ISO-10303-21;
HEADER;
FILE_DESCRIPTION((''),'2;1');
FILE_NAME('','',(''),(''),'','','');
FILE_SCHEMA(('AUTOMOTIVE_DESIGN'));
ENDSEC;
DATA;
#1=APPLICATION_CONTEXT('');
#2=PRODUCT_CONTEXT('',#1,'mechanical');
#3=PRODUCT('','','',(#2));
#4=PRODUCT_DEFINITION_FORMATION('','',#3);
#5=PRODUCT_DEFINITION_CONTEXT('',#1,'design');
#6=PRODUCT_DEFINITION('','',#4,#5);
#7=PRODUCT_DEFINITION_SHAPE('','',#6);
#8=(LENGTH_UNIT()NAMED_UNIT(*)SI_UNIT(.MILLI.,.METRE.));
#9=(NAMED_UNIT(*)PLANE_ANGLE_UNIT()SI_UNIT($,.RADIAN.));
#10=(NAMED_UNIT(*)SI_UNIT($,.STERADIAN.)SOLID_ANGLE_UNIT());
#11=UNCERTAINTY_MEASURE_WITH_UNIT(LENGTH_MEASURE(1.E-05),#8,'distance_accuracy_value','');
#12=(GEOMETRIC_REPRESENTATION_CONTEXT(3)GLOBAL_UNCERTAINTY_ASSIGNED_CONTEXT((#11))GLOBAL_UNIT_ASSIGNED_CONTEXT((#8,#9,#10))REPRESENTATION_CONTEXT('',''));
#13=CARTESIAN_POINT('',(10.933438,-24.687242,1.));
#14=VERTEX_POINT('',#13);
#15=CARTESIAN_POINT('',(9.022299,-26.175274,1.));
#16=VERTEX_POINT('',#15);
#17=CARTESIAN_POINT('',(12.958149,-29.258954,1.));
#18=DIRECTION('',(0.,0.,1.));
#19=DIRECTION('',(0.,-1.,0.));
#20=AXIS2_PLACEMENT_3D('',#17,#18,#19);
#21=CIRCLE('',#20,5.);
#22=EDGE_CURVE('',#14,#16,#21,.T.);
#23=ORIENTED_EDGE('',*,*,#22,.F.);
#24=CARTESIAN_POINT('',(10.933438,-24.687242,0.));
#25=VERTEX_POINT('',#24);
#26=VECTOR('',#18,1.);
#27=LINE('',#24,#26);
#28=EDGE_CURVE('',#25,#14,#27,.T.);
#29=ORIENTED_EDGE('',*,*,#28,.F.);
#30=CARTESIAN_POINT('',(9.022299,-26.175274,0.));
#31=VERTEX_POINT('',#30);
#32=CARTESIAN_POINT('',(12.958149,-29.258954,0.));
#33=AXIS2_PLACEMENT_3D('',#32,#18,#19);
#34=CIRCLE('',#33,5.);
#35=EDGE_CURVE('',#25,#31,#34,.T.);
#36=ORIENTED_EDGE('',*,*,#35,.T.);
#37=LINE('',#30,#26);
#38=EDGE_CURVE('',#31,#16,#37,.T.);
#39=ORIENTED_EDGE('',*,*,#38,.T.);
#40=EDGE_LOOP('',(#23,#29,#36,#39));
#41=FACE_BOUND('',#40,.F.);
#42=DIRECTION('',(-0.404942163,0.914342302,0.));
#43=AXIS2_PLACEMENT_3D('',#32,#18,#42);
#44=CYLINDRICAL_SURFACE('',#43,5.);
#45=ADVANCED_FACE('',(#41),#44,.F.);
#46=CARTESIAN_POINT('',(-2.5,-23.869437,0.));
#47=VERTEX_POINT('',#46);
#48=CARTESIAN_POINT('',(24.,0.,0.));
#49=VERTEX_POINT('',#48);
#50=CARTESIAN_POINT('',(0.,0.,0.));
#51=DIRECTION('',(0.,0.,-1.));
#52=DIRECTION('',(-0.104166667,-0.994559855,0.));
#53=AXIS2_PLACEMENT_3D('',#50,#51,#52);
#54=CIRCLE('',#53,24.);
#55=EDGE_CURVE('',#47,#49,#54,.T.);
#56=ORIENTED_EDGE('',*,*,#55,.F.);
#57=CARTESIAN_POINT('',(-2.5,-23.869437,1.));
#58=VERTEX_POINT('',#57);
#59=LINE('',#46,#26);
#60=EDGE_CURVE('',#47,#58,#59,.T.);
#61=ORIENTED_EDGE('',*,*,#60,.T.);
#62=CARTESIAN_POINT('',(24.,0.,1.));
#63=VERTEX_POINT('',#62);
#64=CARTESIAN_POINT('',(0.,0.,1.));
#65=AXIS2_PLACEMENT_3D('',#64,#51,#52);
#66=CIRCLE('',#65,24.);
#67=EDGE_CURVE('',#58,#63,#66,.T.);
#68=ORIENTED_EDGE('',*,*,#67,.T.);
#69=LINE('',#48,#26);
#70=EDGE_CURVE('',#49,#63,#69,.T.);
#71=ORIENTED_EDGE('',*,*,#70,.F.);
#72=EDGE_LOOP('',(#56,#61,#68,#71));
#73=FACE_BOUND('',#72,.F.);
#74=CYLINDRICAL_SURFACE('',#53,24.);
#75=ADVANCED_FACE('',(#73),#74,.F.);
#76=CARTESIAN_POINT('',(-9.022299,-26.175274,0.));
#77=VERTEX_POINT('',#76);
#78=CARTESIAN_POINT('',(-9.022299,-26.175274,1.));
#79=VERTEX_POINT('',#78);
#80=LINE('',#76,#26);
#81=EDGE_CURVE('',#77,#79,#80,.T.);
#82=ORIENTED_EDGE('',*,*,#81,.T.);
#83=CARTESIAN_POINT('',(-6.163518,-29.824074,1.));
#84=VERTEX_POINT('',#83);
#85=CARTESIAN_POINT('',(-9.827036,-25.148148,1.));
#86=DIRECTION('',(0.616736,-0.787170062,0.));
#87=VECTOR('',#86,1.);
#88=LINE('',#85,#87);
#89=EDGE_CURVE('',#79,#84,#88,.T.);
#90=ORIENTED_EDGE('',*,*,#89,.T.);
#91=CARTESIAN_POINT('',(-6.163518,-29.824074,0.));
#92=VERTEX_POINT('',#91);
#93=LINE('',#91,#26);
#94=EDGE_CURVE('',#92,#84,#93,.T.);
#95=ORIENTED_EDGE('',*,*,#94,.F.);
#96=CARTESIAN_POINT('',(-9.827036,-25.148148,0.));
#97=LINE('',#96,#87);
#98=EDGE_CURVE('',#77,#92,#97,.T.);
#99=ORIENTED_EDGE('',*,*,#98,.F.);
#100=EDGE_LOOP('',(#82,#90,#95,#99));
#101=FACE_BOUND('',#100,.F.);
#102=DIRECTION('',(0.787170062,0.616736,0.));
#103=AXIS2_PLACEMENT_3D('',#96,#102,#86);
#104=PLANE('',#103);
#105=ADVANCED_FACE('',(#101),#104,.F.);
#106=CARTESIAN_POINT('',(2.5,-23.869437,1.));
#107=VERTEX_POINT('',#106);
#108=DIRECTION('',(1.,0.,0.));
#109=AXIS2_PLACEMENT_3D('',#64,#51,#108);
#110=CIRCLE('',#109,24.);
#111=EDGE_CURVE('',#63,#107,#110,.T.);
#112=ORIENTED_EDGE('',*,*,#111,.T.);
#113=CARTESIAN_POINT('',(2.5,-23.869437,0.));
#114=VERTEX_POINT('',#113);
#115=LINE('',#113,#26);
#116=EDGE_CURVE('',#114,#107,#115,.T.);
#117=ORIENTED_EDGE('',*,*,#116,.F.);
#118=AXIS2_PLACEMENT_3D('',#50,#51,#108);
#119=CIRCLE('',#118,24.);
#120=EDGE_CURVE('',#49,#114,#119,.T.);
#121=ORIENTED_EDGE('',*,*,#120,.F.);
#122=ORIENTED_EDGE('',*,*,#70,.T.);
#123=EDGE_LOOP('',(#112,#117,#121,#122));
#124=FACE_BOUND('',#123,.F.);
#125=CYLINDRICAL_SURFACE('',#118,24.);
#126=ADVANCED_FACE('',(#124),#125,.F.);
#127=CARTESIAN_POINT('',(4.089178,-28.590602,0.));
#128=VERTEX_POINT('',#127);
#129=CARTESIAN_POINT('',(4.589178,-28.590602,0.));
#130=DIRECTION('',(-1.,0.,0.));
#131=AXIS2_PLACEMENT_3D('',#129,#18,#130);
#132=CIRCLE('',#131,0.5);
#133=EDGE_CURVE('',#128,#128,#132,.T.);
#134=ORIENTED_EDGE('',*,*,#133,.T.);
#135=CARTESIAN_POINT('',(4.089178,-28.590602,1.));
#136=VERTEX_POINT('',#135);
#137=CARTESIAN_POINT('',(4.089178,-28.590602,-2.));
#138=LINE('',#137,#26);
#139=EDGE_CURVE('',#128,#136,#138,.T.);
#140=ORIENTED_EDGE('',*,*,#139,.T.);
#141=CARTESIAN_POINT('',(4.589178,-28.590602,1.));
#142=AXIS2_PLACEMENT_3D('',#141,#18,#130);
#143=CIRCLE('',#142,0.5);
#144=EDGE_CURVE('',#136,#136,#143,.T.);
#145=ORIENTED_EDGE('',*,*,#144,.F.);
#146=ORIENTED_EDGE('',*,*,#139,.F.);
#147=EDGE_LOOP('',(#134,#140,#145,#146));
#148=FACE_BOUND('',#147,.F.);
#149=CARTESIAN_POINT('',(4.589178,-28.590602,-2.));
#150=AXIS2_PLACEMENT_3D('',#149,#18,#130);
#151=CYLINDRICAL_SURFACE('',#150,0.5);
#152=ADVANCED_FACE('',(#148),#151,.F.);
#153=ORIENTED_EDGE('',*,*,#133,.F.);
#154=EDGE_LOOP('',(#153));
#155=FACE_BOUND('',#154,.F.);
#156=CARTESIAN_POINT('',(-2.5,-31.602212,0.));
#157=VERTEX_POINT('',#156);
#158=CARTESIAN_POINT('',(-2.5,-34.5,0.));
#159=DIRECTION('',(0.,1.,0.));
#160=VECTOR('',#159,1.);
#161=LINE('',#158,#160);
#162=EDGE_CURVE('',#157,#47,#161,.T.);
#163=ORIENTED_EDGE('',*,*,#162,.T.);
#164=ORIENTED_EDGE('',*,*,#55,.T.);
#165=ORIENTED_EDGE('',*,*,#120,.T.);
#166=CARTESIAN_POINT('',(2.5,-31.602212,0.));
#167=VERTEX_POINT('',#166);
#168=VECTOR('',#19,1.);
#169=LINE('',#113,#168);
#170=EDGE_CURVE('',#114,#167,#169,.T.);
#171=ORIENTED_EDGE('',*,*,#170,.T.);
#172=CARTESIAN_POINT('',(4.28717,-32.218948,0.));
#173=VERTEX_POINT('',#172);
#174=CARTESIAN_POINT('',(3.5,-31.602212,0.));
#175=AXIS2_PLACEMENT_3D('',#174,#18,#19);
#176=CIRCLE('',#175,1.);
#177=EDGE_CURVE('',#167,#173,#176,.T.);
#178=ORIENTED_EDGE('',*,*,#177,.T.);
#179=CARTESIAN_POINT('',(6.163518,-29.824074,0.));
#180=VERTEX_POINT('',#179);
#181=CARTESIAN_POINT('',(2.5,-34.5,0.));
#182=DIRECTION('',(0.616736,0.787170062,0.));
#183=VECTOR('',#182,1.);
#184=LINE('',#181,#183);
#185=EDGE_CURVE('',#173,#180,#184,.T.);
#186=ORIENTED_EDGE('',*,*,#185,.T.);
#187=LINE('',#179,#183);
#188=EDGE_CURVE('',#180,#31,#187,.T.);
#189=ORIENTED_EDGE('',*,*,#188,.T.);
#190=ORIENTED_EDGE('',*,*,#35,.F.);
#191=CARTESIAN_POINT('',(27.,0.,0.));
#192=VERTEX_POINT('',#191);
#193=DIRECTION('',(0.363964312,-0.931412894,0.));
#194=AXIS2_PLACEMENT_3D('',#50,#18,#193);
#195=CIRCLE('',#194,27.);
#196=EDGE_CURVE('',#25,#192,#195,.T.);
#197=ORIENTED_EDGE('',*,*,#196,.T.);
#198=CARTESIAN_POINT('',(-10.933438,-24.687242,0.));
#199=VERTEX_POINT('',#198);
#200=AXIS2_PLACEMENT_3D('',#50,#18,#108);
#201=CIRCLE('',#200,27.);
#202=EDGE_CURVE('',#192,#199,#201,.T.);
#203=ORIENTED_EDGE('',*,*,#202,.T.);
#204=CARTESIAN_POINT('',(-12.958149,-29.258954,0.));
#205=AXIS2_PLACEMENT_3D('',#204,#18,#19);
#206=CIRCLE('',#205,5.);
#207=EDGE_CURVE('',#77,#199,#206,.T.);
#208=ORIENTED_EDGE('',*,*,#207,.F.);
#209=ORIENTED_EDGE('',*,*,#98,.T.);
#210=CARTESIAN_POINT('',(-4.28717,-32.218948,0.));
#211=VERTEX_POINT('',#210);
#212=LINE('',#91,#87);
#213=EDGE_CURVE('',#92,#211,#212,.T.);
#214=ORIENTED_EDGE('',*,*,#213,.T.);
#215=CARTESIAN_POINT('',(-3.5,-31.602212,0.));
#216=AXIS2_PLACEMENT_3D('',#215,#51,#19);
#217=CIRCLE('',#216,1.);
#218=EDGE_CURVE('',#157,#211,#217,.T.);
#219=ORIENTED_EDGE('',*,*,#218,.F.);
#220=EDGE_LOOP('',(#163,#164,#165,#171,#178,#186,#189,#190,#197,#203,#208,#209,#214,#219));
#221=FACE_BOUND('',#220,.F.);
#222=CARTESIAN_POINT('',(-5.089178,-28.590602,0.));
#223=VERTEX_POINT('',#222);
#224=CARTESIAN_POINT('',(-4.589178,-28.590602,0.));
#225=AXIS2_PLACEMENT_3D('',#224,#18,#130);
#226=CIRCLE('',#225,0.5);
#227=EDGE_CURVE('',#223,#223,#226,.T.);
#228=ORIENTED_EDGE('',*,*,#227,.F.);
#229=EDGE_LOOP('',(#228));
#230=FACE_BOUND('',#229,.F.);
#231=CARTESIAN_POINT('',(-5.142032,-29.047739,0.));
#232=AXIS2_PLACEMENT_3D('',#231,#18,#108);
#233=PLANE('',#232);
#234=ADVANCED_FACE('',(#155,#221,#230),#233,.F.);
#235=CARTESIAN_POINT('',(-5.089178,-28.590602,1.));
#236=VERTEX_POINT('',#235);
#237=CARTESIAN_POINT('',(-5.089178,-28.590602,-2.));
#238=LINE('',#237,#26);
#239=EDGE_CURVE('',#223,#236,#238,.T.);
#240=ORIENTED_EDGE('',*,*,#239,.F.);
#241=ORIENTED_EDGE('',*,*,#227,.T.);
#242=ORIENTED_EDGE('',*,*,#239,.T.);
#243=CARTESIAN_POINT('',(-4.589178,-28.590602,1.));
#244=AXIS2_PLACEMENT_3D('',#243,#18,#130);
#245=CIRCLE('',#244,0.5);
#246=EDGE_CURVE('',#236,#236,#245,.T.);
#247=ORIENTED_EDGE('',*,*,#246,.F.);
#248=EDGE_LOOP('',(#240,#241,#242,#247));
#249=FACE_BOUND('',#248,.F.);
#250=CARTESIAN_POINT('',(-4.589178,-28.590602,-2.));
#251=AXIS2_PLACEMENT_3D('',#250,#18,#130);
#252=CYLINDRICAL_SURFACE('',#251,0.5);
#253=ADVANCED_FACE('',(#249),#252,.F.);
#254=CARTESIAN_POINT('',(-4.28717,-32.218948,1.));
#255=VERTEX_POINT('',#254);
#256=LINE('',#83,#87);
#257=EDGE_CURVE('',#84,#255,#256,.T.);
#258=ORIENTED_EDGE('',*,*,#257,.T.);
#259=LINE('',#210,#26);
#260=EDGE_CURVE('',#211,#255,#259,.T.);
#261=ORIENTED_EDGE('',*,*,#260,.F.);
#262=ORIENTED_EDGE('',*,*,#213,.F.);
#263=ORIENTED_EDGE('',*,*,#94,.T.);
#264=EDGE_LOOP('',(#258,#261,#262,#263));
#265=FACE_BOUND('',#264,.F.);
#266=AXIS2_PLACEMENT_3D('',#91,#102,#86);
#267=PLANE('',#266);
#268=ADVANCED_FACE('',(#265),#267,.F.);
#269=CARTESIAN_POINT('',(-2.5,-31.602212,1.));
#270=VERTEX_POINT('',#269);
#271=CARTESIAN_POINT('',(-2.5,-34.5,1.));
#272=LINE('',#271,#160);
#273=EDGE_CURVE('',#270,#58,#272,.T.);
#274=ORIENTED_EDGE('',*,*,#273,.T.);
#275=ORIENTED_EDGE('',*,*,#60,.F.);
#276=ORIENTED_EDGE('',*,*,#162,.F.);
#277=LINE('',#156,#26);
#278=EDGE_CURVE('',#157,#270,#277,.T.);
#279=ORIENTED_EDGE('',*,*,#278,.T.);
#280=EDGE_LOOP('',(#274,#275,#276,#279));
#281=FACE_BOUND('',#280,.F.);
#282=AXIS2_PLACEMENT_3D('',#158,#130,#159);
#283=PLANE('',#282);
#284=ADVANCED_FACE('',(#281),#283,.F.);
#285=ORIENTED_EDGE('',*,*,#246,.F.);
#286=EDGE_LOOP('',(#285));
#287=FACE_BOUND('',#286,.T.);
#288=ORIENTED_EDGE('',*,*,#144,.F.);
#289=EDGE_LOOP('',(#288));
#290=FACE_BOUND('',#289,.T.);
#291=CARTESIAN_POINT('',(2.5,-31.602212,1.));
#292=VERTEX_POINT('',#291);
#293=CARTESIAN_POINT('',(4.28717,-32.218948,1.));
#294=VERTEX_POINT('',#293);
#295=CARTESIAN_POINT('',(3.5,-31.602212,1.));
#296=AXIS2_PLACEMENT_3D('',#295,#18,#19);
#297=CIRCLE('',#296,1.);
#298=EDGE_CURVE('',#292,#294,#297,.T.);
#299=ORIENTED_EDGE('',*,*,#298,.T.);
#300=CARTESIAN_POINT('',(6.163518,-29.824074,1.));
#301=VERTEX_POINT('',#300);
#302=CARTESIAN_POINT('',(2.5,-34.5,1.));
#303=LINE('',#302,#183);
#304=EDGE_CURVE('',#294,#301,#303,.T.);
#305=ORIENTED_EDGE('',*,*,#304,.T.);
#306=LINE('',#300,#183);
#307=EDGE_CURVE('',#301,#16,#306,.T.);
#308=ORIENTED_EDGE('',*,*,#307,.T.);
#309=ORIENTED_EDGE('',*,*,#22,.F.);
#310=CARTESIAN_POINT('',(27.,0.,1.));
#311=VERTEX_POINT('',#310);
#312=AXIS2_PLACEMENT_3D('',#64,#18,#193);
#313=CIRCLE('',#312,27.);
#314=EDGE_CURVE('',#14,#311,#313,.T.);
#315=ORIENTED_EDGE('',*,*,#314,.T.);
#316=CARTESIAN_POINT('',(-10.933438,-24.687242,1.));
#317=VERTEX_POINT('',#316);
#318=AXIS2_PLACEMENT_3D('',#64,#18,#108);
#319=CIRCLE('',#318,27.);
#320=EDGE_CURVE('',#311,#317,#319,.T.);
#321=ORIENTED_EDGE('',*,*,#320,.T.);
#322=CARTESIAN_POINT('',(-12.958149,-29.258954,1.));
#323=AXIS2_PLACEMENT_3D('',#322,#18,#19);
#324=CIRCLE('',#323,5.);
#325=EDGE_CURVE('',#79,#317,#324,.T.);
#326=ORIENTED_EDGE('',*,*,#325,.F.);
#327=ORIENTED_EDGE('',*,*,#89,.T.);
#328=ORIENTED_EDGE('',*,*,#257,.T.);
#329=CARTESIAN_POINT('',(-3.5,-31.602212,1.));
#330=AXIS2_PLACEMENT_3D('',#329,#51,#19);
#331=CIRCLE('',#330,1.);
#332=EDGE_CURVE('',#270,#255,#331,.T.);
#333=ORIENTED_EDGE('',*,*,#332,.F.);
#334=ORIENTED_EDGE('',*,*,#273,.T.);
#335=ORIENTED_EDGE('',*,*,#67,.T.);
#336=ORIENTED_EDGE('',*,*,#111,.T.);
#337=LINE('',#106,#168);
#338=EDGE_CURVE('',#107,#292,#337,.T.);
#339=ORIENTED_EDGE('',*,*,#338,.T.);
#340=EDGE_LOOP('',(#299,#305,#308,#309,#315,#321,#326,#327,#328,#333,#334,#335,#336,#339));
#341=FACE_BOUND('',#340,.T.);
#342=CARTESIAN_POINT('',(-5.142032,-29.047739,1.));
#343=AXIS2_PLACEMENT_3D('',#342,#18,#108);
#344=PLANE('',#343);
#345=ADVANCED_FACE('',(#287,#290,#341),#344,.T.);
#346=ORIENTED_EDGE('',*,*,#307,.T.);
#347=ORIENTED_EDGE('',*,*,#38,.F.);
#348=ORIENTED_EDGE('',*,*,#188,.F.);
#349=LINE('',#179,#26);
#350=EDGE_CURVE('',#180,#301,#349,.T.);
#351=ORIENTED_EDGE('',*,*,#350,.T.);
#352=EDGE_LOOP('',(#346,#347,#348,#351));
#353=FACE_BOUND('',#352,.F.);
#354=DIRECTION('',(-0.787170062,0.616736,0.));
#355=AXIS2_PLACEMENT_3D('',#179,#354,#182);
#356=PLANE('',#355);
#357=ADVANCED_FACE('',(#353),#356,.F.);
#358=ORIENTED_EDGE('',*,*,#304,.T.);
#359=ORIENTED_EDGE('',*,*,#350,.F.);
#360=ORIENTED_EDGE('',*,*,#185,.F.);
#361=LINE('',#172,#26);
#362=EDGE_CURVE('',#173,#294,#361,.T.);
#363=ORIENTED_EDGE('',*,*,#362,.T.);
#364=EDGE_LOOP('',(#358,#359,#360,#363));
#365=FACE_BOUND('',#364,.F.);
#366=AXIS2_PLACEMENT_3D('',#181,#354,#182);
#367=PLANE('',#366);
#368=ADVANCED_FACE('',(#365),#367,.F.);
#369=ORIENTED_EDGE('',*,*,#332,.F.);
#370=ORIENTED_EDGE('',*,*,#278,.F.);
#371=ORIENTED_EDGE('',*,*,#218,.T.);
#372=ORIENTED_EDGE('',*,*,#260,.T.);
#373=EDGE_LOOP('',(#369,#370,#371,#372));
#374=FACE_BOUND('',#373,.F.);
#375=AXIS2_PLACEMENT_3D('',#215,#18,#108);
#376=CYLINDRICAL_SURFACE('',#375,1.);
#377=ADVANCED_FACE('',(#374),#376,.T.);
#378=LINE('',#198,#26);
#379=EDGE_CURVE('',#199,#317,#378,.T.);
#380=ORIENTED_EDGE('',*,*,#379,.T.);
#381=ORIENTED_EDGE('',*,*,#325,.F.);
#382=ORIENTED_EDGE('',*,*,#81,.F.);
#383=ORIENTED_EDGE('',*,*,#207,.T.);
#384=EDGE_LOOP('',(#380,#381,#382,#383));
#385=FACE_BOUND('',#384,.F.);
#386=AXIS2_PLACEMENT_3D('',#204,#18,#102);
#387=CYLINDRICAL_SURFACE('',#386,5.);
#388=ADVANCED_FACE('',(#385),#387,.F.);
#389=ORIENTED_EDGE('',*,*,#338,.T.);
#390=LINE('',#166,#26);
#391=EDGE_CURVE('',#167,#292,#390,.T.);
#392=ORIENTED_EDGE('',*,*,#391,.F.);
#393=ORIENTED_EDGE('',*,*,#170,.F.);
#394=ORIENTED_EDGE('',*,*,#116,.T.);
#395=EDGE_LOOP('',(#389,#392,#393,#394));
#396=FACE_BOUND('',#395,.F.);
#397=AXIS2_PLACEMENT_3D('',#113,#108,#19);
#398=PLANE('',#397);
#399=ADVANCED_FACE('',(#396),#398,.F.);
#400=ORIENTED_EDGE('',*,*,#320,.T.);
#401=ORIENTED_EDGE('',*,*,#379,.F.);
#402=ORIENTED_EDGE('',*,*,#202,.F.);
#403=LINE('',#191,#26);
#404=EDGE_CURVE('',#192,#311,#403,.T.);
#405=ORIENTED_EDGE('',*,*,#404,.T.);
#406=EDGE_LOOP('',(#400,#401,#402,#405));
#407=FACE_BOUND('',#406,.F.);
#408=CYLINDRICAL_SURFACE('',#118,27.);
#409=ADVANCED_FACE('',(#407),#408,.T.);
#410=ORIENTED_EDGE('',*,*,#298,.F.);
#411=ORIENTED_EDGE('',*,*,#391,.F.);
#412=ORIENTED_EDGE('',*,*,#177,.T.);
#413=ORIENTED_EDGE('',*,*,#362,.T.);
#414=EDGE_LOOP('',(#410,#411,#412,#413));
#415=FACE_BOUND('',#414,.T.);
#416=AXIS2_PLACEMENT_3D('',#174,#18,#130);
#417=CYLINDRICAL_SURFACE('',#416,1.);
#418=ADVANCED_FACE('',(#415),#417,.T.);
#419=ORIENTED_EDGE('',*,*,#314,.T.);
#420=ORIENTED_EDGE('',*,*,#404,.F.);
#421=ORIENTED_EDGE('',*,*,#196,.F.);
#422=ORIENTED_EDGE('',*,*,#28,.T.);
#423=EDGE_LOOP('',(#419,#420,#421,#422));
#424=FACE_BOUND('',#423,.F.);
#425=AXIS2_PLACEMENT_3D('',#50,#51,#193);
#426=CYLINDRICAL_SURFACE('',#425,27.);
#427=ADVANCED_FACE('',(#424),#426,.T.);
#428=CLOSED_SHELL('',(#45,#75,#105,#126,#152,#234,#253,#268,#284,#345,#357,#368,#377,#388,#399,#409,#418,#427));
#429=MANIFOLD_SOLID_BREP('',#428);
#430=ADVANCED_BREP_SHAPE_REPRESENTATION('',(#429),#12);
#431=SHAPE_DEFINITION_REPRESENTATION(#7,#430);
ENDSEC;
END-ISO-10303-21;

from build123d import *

# Parameters (mm, degrees)
F1_DEPTH = 1
F2_R     = 1
F3_R     = 1
F4_D     = 1
F4_DEPTH = 2
F4_TIP   = 0.3004303095
F5_R     = 5
F6_R     = 5


with BuildPart() as f1:
    # F0 (on Top) → F1 (new body)
    with BuildSketch(Plane.XY):
        with BuildLine():
            Line((-2.5, -34.5), (-2.5, -26.8840101175))
            ThreePointArc((-2.5, -26.8840101175), (-6.224328148, -26.2727565951), (-9.8270364159, -25.1481481481))
            Line((-9.8270364159, -25.1481481481), (-6.1635182079, -29.8240740741))
            Line((-6.1635182079, -29.8240740741), (-2.5, -34.5))
        make_face()
        with BuildLine():
            ThreePointArc((9.8270364159, -25.1481481481), (6.224328148, -26.2727565951), (2.5, -26.8840101175))
            Line((2.5, -26.8840101175), (2.5, -34.5))
            Line((2.5, -34.5), (6.1635182079, -29.8240740741))
            Line((6.1635182079, -29.8240740741), (9.8270364159, -25.1481481481))
        make_face()
        with BuildLine():
            Line((-2.5, -26.8840101175), (-2.5, -26.5288885241))
            Line((-2.5, -26.5288885241), (-9.8270364159, -25.1481481481))
            ThreePointArc((-9.8270364159, -25.1481481481), (-6.224328148, -26.2727565951), (-2.5, -26.8840101175))
        make_face()
        with BuildLine():
            Line((9.8270364159, -25.1481481481), (2.5, -26.5288885241))
            Line((2.5, -26.5288885241), (2.5, -26.8840101175))
            ThreePointArc((2.5, -26.8840101175), (6.224328148, -26.2727565951), (9.8270364159, -25.1481481481))
        make_face()
        with BuildLine():
            ThreePointArc((-2.5, -23.8694365246), (-16.0623784042, 17.8325545001), (24, 0))
            ThreePointArc((24, 0), (17.8325545001, -16.0623784042), (2.5, -23.8694365246))
            Line((2.5, -23.8694365246), (2.5, -26.5288885241))
            Line((2.5, -26.5288885241), (9.8270364159, -25.1481481481))
            ThreePointArc((9.8270364159, -25.1481481481), (22.2971969452, -15.2261291334), (27, 0))
            ThreePointArc((27, 0), (-15.2261291334, 22.2971969452), (-9.8270364159, -25.1481481481))
            Line((-9.8270364159, -25.1481481481), (-2.5, -26.5288885241))
            Line((-2.5, -26.5288885241), (-2.5, -23.8694365246))
        make_face()
    extrude(amount=F1_DEPTH)

    # F2
    f2_edges = [f1.edges().sort_by_distance(p)[0] for p in [
        (2.5, -34.5, 0.5),
    ]]
    fillet(f2_edges, radius=F2_R)

    # F3
    f3_edges = [f1.edges().sort_by_distance(p)[0] for p in [
        (-2.5, -34.5, 0.5),
    ]]
    fillet(f3_edges, radius=F3_R)

    # F4
    with Locations(Plane(origin=(0, 0, 0), x_dir=(1, 0, 0), z_dir=(0, 0, -1))):
        with Locations((-4.5891780847, 28.5906020734), (4.5891780847, 28.5906020734)):
            Hole(F4_D / 2, depth=F4_DEPTH)
            with Locations((0, 0, -(F4_DEPTH + F4_TIP / 2))):  # 118° drill point
                Cone(0, F4_D / 2, F4_TIP, mode=Mode.SUBTRACT)

    # F5
    f5_edges = [f1.edges().sort_by_distance(p)[0] for p in [
        (-9.827036, -25.148148, 0.5),
    ]]
    fillet(f5_edges, radius=F5_R)

    # F6
    f6_edges = [f1.edges().sort_by_distance(p)[0] for p in [
        (9.827036, -25.148148, 0.5),
    ]]
    fillet(f6_edges, radius=F6_R)


solid = f1.part
